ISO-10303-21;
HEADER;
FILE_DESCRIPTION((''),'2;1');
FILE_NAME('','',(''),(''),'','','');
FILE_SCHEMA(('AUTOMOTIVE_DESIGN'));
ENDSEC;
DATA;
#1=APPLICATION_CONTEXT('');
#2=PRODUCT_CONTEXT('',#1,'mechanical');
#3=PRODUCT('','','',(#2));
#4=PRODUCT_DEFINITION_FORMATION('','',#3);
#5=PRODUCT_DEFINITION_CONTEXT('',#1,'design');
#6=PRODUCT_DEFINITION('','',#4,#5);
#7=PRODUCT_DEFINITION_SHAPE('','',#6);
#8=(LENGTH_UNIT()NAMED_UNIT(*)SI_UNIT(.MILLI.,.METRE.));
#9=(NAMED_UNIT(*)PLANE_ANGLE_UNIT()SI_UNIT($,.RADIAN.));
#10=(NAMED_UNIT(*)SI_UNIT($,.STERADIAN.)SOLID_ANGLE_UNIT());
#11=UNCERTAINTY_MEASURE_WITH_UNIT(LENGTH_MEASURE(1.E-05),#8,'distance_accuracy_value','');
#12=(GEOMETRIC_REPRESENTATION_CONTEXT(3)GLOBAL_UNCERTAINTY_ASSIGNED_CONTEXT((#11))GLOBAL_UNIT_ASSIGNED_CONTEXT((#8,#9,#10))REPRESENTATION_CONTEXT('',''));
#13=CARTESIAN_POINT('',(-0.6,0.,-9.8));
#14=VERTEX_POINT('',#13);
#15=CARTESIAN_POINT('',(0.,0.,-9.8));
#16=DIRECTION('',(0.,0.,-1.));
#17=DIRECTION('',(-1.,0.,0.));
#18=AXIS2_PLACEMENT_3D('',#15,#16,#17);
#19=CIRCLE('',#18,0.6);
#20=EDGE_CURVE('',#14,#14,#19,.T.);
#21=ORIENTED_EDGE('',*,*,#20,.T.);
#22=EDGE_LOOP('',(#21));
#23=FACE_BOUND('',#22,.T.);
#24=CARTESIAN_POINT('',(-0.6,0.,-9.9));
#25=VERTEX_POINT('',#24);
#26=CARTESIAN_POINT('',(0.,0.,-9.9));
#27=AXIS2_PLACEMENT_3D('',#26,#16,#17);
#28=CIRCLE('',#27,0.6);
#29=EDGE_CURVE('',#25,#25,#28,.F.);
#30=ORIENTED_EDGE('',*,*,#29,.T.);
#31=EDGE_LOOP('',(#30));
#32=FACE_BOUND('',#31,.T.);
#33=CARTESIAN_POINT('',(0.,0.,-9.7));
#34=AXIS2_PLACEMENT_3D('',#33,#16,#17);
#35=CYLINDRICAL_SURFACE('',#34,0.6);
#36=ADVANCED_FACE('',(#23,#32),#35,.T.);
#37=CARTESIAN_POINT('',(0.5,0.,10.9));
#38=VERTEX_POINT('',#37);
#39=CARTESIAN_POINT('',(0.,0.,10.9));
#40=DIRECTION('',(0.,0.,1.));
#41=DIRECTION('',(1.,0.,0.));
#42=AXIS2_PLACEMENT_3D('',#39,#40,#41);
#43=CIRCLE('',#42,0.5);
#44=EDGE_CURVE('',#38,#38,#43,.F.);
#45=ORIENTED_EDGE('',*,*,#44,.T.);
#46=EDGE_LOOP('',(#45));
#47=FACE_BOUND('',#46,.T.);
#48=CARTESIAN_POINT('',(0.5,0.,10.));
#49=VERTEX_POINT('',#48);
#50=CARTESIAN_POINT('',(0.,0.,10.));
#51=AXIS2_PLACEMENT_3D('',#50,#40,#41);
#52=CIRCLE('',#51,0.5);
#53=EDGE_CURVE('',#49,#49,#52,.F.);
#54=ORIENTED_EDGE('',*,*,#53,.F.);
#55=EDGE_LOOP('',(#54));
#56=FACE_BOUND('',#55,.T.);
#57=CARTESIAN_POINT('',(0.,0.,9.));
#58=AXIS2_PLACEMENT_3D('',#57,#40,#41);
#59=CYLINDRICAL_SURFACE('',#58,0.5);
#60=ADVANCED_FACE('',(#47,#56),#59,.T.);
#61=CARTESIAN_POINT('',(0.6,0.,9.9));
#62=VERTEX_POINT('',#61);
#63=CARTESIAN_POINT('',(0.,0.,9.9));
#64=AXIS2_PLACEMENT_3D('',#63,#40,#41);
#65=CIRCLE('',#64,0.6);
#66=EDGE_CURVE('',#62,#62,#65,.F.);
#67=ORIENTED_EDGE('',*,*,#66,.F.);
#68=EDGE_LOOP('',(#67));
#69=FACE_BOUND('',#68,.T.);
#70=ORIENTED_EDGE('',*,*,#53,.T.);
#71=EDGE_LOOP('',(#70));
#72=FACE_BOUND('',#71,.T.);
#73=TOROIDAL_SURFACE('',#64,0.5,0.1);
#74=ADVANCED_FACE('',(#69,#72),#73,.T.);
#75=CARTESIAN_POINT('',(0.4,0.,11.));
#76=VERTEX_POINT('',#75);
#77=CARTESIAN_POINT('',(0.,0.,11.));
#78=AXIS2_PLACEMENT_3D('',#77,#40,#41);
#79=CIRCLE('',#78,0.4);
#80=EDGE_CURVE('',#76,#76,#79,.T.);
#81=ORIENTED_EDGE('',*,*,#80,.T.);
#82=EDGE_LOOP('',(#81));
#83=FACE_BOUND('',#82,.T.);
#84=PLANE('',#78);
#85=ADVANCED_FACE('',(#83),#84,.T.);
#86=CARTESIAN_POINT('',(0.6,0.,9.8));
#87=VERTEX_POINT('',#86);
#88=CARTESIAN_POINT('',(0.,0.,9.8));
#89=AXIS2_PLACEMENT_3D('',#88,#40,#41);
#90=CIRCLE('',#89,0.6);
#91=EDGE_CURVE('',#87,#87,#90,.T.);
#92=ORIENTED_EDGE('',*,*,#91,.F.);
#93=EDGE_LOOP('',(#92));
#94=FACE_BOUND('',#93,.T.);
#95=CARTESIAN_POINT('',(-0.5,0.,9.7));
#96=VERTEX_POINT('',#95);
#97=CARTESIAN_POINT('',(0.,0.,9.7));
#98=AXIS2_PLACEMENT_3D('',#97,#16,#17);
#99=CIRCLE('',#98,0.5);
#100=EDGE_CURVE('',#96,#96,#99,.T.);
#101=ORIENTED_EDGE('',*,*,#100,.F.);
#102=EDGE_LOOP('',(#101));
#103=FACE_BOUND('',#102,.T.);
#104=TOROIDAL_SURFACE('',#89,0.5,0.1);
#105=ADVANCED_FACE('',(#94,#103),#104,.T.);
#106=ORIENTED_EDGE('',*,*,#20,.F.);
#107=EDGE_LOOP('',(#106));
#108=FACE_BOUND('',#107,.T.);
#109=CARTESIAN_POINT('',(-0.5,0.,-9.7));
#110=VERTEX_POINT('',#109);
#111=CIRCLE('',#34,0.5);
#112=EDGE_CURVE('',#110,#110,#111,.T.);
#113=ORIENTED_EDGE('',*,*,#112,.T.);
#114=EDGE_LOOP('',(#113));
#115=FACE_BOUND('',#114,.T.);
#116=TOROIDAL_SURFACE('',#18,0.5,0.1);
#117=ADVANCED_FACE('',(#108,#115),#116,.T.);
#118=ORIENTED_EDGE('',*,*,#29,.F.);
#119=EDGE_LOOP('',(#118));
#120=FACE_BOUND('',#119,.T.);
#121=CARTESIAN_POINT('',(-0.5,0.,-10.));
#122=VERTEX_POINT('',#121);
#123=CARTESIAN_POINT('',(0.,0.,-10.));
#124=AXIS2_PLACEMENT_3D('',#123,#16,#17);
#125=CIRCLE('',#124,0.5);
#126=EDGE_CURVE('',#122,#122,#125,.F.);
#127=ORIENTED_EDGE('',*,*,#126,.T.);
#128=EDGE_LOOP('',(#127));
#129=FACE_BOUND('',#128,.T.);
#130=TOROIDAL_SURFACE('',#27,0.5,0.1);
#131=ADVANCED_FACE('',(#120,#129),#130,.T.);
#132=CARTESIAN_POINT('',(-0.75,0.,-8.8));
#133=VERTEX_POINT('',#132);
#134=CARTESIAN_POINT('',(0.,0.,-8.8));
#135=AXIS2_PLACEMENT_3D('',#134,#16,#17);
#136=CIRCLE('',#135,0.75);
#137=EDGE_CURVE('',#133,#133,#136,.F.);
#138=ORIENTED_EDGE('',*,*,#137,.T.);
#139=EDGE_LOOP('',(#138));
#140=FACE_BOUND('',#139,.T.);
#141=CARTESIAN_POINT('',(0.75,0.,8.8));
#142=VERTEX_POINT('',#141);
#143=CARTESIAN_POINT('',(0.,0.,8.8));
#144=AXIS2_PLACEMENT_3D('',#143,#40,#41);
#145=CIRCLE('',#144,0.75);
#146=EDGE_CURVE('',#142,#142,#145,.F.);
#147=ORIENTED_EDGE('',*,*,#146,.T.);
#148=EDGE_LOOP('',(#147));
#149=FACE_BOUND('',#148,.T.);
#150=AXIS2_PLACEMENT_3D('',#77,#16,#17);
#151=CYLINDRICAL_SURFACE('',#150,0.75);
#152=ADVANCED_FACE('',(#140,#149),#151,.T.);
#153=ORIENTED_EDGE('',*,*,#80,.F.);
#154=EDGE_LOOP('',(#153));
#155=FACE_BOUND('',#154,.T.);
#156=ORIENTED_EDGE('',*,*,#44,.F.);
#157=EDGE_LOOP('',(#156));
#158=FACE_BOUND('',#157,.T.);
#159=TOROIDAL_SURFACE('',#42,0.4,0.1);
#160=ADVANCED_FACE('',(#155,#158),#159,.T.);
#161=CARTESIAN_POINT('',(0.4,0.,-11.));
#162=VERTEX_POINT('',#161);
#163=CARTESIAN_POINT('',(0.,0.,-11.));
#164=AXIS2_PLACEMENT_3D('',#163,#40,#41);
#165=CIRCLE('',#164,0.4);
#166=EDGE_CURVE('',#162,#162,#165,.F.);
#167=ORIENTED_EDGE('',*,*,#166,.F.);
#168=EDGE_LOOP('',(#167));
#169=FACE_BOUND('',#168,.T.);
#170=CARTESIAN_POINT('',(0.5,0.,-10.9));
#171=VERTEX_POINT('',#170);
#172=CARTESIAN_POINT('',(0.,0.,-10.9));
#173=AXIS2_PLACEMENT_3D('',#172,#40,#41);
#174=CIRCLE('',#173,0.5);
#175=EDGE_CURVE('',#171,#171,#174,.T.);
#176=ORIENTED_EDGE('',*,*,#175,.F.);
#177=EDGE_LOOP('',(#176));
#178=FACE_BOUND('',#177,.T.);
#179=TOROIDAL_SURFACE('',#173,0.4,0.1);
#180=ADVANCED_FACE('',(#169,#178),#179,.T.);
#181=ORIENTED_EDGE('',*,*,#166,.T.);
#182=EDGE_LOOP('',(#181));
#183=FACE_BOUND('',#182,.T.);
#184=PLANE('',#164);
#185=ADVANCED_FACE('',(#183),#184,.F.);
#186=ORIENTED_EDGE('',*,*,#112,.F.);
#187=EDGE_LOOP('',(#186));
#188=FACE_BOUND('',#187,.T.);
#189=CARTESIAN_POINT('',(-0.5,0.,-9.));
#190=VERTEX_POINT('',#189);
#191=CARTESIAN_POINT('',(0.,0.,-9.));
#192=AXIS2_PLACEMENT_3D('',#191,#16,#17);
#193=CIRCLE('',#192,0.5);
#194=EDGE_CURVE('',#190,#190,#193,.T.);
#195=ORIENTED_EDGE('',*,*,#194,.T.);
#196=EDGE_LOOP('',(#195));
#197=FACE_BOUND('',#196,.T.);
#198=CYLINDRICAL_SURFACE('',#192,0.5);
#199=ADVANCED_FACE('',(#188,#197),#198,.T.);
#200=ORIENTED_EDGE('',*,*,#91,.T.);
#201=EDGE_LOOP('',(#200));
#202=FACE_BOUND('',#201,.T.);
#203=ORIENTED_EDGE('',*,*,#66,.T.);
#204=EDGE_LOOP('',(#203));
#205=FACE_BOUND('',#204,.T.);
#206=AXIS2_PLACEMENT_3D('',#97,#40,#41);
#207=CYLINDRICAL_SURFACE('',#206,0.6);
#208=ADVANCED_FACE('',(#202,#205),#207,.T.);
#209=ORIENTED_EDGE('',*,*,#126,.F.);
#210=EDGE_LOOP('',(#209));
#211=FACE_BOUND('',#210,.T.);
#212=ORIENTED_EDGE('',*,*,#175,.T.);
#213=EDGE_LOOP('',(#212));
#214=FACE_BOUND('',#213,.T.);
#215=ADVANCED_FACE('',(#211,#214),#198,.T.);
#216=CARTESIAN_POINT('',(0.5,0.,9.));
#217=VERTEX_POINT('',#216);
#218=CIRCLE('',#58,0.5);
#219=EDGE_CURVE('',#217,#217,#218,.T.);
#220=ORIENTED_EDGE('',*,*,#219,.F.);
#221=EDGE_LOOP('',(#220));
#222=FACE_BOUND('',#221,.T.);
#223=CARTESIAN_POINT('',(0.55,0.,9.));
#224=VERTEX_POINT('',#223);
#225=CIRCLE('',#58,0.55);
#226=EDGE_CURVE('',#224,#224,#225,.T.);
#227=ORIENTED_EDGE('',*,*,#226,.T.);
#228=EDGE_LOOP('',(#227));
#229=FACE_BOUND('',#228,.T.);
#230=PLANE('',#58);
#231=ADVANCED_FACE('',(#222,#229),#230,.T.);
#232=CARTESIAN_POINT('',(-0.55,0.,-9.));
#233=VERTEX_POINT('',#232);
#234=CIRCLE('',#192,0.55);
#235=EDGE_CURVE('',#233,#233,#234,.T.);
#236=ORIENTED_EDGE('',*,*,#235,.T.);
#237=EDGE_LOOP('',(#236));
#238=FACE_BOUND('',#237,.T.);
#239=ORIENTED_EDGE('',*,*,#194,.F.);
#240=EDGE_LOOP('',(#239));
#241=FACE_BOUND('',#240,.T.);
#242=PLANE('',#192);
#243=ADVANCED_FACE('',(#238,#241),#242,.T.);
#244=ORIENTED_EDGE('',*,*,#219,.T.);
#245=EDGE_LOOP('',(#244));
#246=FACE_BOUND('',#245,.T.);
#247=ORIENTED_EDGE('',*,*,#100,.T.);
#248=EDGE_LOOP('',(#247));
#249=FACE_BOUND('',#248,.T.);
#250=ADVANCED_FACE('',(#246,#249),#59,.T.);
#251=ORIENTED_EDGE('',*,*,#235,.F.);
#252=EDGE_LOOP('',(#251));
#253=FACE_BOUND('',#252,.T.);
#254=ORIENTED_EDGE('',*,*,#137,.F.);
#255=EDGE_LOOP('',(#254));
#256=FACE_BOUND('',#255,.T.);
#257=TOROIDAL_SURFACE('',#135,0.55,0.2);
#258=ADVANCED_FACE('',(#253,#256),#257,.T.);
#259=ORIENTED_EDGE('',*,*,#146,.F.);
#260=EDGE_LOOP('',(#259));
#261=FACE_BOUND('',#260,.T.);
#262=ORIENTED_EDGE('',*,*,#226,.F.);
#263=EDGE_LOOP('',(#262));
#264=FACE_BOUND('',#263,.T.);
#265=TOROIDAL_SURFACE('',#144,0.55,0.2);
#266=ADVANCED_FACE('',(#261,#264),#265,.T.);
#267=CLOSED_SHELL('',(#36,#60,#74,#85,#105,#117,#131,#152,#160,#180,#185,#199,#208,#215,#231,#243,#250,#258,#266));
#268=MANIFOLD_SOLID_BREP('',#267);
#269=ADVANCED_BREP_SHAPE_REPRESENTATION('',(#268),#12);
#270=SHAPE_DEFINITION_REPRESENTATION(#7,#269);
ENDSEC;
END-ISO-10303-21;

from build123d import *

# Parameters (mm, degrees)
SKETCH1_R           = 0.75
BOSS_EXTRUDE1_DEPTH = 11
SKETCH2_R           = 1.389423691
SKETCH2_R_2         = 0.5
CUT_EXTRUDE1_DEPTH  = 2
CUT_EXTRUDE2_START  = -2
SKETCH3_R           = 1.153055404
SKETCH3_R_2         = 0.5
CUT_EXTRUDE2_DEPTH  = 2
BOSS_EXTRUDE2_START = -1.3
SKETCH4_R           = 0.6
SKETCH4_R_2         = 0.5
BOSS_EXTRUDE2_DEPTH = 0.3
FILLET1_R           = 0.2
FILLET2_R           = 0.1
FILLET3_R           = 0.1


with BuildPart() as part:
    # Sketch1 → Boss-Extrude1 (new, symmetric)
    with BuildSketch(Plane.XY):
        Circle(SKETCH1_R)
    extrude(amount=BOSS_EXTRUDE1_DEPTH, both=True)

    # Sketch2 → Cut-Extrude1 (cut)
    with BuildSketch(Plane.XY.offset(11)):
        Circle(SKETCH2_R)
        Circle(SKETCH2_R_2, mode=Mode.SUBTRACT)
    extrude(amount=-CUT_EXTRUDE1_DEPTH, mode=Mode.SUBTRACT)

    # Sketch3 → Cut-Extrude2 (cut)
    with BuildSketch(Plane(origin=(0, 0, -11), x_dir=(-1, 0, 0), z_dir=(0, 0, -1)).offset(CUT_EXTRUDE2_START)):
        Circle(SKETCH3_R)
        with Locations(Location((0, 0, 0), (0, 0, 180))):
            Circle(SKETCH3_R_2, mode=Mode.SUBTRACT)
    extrude(amount=CUT_EXTRUDE2_DEPTH, mode=Mode.SUBTRACT)

    # Sketch4 → Boss-Extrude2 (add)
    with BuildSketch(Plane(origin=(0, 0, -11), x_dir=(-1, 0, 0), z_dir=(0, 0, -1)).offset(BOSS_EXTRUDE2_START)):
        Circle(SKETCH4_R)
        Circle(SKETCH4_R_2, mode=Mode.SUBTRACT)
    boss_extrude2 = extrude(amount=BOSS_EXTRUDE2_DEPTH)

    # Fillet1
    fillet1_edges = [part.edges().sort_by_distance(p)[0] for p in [
        (-0.75, 0, -9),
        (-0.75, 0, 9),
    ]]
    fillet(fillet1_edges, radius=FILLET1_R)

    # Fillet2
    fillet2_edges = [part.edges().sort_by_distance(p)[0] for p in [
        (-0.5, 0, -11),
        (0.6, 0, -9.7),
        (0.6, 0, -10),
    ]]
    fillet(fillet2_edges, radius=FILLET2_R - 0.0001)  # a hair under: the kernel refuses the full size

    # Mirror1: Boss-Extrude2 across plane
    add(boss_extrude2.mirror(Plane.XY))

    # Fillet3
    fillet3_edges = [part.edges().sort_by_distance(p)[0] for p in [
        (0.6, 0, 9.7),
        (0.6, 0, 10),
        (-0.5, 0, 11),
    ]]
    fillet(fillet3_edges, radius=FILLET3_R - 0.0001)  # a hair under: the kernel refuses the full size


solid = part.part
